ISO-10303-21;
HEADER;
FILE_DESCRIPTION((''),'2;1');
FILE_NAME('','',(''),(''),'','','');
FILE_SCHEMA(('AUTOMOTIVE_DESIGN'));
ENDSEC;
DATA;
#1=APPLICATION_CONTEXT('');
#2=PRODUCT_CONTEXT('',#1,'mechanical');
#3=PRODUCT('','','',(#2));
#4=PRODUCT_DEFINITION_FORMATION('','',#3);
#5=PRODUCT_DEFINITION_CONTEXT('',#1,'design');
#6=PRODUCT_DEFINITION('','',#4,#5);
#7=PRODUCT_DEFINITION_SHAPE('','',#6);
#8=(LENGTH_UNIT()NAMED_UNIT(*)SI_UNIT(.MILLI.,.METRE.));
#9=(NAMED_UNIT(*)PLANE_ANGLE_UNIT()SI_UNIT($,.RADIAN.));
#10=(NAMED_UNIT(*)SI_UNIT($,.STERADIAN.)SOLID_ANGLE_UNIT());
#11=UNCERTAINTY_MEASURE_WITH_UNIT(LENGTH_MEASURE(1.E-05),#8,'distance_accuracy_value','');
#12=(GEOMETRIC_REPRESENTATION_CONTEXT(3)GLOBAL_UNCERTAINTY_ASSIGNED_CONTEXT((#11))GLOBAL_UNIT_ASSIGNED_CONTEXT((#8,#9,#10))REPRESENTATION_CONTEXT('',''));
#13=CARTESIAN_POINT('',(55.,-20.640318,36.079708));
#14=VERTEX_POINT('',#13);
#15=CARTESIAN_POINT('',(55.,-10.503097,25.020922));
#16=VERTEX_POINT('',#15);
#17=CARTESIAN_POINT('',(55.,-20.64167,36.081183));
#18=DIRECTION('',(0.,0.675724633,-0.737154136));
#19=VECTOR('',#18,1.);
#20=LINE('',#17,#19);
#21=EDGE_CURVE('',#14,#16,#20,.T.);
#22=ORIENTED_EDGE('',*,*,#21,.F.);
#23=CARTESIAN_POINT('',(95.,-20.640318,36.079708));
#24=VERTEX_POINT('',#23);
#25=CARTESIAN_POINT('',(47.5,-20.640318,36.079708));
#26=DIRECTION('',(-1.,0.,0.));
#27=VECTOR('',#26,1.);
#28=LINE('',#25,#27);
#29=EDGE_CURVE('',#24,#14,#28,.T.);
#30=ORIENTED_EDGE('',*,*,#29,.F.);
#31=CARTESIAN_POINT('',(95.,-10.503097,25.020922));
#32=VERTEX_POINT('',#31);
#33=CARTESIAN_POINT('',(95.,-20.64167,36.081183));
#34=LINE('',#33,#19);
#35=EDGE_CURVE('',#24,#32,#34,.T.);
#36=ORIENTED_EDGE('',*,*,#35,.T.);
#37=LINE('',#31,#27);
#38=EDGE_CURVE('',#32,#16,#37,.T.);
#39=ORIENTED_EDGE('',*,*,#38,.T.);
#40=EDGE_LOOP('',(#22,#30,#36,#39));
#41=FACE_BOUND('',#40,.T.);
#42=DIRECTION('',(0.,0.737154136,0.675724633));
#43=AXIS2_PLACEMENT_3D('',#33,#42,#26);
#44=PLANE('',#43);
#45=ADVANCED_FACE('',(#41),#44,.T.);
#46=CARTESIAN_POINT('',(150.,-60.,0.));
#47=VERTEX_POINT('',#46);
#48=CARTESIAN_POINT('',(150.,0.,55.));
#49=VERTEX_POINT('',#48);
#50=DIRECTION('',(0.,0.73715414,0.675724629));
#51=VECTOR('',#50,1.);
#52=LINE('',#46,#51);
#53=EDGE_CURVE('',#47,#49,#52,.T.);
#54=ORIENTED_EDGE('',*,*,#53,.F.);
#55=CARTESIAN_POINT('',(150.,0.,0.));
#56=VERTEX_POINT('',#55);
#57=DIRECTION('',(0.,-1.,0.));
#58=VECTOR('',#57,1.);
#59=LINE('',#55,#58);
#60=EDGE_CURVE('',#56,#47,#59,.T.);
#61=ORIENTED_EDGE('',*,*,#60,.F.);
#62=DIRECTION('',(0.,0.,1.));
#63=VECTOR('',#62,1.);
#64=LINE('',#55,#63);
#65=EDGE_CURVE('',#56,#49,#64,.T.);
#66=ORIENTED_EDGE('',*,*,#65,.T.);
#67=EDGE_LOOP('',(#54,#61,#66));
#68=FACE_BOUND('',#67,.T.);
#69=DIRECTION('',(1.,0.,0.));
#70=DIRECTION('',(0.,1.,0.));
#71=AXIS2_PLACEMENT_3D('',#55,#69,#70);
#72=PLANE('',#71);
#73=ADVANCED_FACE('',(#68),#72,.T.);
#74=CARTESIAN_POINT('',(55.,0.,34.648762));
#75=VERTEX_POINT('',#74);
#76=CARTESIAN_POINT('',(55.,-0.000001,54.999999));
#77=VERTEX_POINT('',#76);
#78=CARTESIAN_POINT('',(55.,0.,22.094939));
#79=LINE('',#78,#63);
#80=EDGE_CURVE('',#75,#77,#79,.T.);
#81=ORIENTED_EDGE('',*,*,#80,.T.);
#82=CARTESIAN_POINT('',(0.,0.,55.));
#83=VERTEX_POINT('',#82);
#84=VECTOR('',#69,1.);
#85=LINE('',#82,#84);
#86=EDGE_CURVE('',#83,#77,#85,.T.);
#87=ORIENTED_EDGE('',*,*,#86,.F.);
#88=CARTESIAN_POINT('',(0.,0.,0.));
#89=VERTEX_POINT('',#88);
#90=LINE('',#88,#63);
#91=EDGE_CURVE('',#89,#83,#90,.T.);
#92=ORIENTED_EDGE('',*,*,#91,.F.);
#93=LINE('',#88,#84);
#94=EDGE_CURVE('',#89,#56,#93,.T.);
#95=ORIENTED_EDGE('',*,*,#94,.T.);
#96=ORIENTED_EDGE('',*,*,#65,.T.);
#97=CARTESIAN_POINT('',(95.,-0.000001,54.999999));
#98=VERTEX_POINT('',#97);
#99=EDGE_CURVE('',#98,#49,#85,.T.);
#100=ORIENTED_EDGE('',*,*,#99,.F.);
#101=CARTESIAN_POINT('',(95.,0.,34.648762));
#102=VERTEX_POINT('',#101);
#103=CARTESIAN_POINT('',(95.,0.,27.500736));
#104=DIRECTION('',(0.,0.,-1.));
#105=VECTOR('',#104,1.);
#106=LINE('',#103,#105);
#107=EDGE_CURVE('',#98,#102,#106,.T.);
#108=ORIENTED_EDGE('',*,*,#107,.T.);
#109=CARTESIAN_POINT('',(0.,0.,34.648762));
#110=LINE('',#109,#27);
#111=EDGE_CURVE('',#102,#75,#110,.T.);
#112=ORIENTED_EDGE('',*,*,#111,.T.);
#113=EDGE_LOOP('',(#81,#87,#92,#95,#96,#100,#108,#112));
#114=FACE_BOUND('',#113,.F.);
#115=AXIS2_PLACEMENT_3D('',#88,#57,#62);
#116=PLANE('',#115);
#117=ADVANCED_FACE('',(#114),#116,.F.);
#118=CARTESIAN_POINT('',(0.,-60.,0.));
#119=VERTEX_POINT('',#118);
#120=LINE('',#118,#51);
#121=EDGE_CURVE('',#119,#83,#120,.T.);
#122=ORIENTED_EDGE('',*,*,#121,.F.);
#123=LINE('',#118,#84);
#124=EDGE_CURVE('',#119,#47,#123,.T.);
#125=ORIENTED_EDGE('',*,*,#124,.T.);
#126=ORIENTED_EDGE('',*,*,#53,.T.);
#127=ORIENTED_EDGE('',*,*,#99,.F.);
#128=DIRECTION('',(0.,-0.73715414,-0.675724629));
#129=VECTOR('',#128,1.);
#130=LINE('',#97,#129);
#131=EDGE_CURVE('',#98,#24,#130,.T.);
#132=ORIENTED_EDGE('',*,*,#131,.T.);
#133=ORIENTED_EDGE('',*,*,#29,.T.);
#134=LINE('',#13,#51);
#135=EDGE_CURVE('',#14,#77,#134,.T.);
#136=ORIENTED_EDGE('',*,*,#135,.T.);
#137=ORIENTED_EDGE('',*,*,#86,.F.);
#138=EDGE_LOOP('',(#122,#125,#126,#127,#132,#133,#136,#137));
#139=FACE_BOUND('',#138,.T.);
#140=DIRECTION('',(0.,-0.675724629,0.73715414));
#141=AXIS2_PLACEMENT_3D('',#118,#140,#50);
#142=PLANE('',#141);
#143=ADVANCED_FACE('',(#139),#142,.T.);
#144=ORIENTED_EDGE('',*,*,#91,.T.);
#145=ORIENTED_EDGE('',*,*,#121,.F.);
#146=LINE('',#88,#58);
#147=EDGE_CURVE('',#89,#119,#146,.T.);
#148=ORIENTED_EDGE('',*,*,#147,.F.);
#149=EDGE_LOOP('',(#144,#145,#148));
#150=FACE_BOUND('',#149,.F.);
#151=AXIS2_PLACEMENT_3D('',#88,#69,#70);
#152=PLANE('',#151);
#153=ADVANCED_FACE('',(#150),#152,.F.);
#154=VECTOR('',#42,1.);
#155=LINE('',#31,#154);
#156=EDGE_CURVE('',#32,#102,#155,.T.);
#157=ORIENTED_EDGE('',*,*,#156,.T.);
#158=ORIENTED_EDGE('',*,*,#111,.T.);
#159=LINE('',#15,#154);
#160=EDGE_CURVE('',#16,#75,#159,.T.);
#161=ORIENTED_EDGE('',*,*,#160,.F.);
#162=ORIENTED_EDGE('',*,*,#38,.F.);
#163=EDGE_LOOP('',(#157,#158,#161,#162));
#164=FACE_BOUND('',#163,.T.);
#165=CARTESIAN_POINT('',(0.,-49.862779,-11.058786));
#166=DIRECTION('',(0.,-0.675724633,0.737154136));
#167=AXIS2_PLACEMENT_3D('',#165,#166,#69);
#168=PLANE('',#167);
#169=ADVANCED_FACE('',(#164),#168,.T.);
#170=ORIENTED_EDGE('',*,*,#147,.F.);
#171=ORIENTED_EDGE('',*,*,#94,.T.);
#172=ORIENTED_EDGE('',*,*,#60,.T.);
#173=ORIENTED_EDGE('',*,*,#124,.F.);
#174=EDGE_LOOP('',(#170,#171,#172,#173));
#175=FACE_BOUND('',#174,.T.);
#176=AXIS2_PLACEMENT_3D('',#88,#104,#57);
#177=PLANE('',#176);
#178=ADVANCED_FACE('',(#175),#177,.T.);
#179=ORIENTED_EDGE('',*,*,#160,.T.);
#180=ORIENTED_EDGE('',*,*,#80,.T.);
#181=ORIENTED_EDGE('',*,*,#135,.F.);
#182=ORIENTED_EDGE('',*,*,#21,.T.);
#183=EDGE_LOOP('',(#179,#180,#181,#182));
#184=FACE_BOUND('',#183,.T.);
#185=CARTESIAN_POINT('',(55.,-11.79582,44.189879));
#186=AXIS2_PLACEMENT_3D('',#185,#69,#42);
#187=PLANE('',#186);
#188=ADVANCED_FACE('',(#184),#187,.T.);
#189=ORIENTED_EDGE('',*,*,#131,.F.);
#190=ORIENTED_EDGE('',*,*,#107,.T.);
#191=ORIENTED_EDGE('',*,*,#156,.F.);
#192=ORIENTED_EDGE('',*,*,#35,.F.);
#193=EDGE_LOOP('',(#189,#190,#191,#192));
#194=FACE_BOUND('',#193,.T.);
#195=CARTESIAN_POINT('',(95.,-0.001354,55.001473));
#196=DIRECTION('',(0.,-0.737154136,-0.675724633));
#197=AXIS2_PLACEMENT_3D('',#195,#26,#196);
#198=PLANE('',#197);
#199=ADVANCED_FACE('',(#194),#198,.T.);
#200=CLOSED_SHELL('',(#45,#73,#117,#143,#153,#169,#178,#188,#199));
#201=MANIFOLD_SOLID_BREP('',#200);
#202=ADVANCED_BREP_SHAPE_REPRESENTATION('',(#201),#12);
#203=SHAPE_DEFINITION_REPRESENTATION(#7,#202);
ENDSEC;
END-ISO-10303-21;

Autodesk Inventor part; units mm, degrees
ref_plane "YZ Plane" through (0, 0, 0) normal (1, 0, 0) x (0, 1, 0)
ref_plane "XZ Plane" through (0, 0, 0) normal (0, 1, 0) x (-1, 0, 0)
ref_plane "XY Plane" through (0, 0, 0) normal (0, 0, 1) x (1, 0, 0)
sketch "Szkic1" plane through (0, 0, 0) normal (1, 0, 0) x (0, 1, 0)
  line L0 (0, 0) -> (0, 55)
  line L1 (0, 0) -> (-60, 0)
  line L2 (-60, 0) -> (0, 55)
  dimension "d0" = 55
  dimension "d1" = 60
extrude "Wyciągnięcie proste1" add sketch "Szkic1" along normal blind 150
sketch "Szkic2" plane through (0, -60, 0) normal (0, -0.6757246, 0.7371541) x (1, 0, 0)
  line L0 (0, 81.3941) -> (150, 81.3941) projected
  line L1 (55, 81.3941) -> (95, 81.3941)
  line L2 (95, 81.3941) -> (95, 65.3941)
  line L3 (95, 65.3941) -> (55, 65.3941)
  line L4 (55, 65.3941) -> (55, 81.3941)
  point P0 (0, 44.2292)
  dimension "d4" = 40
  dimension "d5" = 16
extrude "Wyciągnięcie proste2" cut sketch "Szkic2" against normal blind 15
sketch "Szkic3" plane through (0, -60, 0) normal (0, -0.6757246, 0.7371541) x (1, 0, 0)
  line L0 (55, 65.3941) -> (95, 65.3941)
  line L1 (95, 65.3941) -> (95, 59.3941)
  line L2 (95, 59.3941) -> (55, 59.3941)
  line L3 (55, 59.3941) -> (55, 65.3941)
  point P0 (0, 44.2292)
  dimension "d8" = 40
  dimension "d9" = 6
extrude "Wyciągnięcie proste3" cut sketch "Szkic3" against normal blind 15
sketch "Szkic4" plane through (0, -60, 0) normal (0, -0.6757246, 0.7371541) x (1, 0, 0)
  line L0 (55, 59.3941) -> (95, 59.3941)
  line L1 (95, 59.3941) -> (95, 53.3941)
  line L2 (95, 53.3941) -> (55, 53.3941)
  line L3 (55, 53.3941) -> (55, 59.3941)
  point P0 (0, 44.2292)
  dimension "d12" = 40
  dimension "d13" = 6
extrude "Wyciągnięcie proste4" cut sketch "Szkic4" against normal blind 15
properties part number "klin" material "Brąz, odlew"
